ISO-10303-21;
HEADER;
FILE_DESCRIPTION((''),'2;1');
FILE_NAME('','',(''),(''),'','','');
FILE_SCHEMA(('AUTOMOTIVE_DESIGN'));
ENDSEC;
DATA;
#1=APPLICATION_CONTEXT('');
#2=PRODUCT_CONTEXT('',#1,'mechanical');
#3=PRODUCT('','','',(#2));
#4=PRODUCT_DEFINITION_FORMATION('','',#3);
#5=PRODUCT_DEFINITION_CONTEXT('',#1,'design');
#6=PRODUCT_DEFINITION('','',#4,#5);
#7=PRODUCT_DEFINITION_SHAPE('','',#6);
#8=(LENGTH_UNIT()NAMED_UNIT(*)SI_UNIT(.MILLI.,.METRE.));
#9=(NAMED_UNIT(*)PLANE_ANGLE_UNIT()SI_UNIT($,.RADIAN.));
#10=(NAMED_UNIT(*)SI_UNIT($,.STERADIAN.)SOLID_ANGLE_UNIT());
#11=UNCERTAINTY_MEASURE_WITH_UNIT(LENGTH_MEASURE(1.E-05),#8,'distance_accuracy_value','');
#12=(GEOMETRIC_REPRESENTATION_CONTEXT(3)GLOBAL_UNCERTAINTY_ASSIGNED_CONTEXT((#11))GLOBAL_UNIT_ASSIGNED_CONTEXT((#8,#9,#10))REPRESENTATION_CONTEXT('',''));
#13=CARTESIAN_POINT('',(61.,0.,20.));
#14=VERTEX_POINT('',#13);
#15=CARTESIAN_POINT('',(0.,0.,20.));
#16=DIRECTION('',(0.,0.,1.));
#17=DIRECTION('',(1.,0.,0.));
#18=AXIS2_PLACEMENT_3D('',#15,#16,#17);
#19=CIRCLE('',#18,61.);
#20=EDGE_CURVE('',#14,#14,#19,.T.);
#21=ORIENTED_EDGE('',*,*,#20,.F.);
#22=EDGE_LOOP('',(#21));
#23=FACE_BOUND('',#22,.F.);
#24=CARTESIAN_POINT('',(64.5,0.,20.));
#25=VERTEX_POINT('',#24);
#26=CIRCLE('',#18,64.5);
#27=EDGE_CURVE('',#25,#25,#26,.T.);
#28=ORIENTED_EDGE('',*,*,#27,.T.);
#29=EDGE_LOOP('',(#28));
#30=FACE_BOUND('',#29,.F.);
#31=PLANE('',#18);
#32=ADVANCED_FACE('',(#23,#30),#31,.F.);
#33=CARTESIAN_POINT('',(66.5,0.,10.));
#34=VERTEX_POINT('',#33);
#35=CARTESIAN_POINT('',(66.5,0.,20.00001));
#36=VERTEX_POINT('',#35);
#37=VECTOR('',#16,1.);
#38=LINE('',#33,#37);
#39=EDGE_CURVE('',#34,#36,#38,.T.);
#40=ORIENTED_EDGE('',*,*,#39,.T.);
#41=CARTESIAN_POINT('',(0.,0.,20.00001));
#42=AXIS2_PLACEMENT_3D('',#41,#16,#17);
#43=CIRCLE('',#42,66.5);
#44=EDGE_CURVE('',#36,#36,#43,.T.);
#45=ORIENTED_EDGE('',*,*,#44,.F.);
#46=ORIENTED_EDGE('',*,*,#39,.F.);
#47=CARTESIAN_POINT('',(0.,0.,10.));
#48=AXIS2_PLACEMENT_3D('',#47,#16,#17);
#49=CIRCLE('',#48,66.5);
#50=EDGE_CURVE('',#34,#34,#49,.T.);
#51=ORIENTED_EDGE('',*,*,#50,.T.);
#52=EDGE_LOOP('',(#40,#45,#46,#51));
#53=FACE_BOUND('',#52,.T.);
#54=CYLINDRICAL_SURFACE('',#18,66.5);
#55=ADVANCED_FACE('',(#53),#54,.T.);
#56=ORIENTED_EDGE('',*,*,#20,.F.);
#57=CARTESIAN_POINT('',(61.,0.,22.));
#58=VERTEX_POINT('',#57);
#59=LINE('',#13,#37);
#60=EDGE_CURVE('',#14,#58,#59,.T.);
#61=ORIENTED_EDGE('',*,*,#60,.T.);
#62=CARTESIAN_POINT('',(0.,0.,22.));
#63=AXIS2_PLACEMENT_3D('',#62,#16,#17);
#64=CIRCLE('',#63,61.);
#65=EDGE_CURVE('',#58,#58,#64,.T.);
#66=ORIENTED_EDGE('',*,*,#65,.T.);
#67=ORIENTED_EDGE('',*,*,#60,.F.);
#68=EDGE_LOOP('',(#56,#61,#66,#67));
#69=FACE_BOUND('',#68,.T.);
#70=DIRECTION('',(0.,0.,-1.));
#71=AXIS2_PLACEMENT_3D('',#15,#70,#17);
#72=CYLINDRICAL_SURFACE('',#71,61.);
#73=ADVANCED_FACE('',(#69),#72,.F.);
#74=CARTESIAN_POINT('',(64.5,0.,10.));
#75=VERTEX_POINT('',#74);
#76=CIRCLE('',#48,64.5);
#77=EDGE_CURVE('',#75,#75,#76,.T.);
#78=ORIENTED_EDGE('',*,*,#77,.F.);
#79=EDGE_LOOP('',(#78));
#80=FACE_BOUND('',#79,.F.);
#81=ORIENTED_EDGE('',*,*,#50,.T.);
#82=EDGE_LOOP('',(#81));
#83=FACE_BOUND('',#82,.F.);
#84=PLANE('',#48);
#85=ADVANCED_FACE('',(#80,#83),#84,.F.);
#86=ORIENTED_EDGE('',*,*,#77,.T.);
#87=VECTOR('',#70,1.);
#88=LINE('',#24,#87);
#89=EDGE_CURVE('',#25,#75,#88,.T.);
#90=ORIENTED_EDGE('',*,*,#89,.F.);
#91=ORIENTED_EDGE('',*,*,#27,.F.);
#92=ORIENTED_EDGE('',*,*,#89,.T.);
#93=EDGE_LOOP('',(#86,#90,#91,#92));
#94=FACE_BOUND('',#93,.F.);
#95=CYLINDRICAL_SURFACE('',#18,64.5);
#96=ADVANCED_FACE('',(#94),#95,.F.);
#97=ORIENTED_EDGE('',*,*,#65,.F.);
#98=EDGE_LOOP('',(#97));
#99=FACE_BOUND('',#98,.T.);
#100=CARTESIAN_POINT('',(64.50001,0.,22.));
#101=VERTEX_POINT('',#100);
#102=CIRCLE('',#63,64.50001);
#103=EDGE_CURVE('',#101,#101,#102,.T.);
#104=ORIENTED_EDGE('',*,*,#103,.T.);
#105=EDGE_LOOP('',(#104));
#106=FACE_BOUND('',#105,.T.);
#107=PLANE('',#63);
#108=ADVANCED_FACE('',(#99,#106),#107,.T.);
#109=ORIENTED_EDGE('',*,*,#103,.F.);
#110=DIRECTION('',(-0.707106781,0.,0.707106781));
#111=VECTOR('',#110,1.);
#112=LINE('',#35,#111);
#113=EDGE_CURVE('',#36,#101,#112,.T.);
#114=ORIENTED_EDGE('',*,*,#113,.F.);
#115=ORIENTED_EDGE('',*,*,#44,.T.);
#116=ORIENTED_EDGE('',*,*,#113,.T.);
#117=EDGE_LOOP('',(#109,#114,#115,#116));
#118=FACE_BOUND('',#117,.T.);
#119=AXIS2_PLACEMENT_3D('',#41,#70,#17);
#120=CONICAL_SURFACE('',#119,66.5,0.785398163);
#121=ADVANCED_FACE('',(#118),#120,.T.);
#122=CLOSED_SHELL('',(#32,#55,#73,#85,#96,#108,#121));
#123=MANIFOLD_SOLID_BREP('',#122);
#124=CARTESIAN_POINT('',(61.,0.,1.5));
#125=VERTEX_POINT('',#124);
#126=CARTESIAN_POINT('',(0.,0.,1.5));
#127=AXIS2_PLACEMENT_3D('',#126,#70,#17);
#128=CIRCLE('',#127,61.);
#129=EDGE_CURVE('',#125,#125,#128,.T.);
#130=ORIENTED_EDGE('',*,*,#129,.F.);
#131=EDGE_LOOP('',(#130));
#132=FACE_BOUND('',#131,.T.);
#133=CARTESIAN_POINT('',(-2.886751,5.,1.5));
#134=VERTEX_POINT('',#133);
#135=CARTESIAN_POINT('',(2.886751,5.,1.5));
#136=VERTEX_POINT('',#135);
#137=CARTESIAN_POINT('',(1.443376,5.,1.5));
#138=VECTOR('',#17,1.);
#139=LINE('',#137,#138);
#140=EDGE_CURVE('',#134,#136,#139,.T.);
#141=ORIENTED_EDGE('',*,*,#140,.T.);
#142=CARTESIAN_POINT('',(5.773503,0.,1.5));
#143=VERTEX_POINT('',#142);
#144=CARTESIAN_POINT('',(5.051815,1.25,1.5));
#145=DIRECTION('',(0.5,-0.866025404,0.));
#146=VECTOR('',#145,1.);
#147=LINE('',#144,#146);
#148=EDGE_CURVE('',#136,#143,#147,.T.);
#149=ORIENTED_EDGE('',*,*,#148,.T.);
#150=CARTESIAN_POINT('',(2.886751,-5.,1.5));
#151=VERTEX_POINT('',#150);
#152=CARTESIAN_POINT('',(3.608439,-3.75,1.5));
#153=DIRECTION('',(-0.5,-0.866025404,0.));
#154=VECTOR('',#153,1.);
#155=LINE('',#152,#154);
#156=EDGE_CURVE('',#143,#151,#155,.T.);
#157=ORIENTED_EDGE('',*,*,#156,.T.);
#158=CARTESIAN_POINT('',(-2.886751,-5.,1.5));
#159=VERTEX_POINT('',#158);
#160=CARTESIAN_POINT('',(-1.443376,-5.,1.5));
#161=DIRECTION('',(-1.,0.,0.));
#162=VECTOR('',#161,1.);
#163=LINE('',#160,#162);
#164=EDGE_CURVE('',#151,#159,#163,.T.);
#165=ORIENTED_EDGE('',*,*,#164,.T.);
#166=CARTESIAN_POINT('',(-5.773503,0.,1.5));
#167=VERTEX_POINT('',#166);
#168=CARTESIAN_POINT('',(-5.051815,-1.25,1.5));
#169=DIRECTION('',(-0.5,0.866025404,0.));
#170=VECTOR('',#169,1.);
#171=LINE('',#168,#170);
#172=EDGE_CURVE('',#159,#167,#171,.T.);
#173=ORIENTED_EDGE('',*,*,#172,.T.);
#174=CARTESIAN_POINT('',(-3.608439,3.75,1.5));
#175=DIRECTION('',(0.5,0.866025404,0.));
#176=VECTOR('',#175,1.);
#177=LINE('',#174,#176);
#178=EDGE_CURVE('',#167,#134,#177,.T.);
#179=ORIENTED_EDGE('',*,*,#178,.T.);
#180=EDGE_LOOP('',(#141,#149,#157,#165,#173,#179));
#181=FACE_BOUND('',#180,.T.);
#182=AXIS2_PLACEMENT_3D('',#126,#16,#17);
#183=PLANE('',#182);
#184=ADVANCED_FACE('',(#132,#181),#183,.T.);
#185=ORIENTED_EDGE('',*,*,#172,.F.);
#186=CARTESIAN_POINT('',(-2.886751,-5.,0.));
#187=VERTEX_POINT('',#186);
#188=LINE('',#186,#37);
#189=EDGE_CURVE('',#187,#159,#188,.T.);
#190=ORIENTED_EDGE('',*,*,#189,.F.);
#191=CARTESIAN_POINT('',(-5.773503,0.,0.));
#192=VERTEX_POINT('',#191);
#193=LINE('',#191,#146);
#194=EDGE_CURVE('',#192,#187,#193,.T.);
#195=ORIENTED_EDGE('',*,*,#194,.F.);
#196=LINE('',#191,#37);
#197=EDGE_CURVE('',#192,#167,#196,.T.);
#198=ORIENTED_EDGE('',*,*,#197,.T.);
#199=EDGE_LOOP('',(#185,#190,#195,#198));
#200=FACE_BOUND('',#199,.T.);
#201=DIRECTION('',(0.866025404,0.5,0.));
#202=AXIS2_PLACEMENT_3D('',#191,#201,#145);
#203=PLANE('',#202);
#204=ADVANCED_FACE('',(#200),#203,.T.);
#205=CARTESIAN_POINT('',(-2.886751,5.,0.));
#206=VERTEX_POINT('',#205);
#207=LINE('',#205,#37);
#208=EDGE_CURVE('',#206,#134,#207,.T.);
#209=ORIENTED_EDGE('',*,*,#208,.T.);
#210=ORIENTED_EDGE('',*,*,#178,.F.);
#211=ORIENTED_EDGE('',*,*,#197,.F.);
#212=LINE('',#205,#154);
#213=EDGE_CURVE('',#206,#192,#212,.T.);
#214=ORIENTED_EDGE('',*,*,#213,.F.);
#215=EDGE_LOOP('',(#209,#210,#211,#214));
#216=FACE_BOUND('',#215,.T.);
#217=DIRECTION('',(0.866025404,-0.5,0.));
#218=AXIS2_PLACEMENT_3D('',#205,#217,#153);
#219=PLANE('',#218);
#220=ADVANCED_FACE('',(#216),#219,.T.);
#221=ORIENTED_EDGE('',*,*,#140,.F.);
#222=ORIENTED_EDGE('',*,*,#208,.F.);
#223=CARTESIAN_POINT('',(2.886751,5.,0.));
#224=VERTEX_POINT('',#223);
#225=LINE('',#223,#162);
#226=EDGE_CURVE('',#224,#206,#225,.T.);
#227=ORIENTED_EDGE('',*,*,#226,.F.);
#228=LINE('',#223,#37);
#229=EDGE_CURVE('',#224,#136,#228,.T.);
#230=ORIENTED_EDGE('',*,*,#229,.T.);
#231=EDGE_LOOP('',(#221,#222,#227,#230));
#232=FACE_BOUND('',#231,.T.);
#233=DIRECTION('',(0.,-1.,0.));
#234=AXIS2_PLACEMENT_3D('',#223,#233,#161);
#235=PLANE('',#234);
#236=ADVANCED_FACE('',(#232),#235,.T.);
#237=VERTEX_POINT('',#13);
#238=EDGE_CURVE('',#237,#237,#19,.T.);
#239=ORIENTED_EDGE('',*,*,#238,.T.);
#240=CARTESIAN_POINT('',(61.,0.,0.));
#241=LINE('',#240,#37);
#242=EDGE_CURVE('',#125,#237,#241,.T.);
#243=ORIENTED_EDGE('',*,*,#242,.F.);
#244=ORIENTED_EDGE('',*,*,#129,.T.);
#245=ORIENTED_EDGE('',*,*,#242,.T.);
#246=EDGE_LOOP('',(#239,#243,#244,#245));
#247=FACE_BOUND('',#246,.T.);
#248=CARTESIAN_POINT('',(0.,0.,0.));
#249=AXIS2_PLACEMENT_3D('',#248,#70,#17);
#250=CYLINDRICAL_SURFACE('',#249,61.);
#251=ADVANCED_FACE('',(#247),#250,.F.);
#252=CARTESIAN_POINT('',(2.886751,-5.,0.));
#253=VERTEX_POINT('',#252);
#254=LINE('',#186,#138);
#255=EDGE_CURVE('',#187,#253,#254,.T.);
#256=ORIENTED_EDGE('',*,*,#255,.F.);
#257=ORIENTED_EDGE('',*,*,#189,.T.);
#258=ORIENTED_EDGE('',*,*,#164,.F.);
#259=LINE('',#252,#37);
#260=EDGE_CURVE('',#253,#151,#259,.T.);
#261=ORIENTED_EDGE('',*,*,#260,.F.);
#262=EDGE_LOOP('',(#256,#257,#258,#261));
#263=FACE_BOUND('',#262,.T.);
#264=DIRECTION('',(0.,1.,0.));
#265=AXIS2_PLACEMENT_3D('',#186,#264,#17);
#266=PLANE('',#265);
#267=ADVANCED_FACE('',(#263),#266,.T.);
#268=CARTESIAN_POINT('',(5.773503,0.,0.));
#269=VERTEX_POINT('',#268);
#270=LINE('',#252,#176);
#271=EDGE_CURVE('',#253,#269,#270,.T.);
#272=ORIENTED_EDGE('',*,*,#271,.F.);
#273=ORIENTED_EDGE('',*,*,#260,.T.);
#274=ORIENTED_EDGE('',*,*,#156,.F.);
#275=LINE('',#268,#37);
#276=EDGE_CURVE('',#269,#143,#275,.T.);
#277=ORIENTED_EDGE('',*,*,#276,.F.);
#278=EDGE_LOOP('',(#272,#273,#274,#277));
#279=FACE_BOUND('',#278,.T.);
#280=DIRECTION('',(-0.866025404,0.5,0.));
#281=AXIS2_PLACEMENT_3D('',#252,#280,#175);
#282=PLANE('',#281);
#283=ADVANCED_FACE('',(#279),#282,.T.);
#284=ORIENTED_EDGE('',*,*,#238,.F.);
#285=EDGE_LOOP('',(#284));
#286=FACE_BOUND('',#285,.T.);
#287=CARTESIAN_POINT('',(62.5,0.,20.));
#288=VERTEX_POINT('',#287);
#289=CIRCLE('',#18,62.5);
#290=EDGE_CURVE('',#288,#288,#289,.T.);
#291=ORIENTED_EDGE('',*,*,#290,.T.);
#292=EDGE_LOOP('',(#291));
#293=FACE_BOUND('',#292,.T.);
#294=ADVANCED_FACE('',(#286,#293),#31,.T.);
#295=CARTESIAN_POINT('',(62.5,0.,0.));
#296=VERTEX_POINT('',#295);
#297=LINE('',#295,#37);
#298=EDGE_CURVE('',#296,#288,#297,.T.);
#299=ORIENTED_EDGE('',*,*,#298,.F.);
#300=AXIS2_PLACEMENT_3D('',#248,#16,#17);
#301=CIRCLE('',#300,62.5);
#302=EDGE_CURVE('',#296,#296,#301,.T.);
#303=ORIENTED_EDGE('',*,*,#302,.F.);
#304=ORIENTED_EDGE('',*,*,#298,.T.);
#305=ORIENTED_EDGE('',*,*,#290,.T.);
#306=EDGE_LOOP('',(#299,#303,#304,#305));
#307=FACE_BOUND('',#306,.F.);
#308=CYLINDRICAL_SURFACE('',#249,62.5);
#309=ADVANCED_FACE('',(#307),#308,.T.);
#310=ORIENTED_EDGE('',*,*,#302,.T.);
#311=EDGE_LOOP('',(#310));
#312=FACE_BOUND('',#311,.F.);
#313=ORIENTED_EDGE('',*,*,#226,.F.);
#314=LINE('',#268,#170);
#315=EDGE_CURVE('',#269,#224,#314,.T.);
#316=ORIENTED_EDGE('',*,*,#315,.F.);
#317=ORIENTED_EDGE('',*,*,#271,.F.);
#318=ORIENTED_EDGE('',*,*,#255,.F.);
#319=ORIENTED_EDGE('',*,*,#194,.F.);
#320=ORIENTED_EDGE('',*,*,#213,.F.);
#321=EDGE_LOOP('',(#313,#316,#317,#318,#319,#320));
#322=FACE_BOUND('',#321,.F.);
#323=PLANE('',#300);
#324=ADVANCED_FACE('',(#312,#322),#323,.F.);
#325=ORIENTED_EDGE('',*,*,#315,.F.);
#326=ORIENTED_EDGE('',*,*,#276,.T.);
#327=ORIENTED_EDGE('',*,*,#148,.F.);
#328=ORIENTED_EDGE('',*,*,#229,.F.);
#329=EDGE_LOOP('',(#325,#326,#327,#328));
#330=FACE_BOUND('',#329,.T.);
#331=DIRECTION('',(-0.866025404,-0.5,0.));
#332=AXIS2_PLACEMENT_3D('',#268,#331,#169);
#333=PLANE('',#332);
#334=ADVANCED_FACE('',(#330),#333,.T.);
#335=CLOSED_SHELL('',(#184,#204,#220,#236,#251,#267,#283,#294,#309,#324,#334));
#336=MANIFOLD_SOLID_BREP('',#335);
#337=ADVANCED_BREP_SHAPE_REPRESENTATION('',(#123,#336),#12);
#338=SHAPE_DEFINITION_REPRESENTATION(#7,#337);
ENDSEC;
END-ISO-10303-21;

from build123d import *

# Parameters (mm, degrees)
F0_R     = 62.5
F1_DEPTH = 20
F2_T     = -1.5
F3_DEPTH = 25
F4_R     = 66.5
F4_R_2   = 64.5
F4_R_3   = 62.5
F4_R_4   = 61
F5_DEPTH = 2
F6_DEPTH = 10
F7_SIZE  = 1.99999


# Not quite as in the source:
# - a fillet or chamfer is up to 0.001 mm smaller than in the source, because OpenCascade refuses the exact size


with BuildPart() as f1:
    # F0 (on Top) → F1 (new body)
    with BuildSketch(Plane.XY):
        Circle(F0_R)
        Polygon((5.7735026919, 0), (2.8867513459, -5), (-2.8867513459, -5), (-5.7735026919, 0), (-2.8867513459, 5), (2.8867513459, 5), align=None, mode=Mode.SUBTRACT)
        Polygon((-2.8867513459, -5), (2.8867513459, -5), (5.7735026919, 0), (2.8867513459, 5), (-2.8867513459, 5), (-5.7735026919, 0), align=None)
    extrude(amount=F1_DEPTH)

    # F2
    f2_openings = [f1.faces().sort_by_distance(p)[0] for p in [
        (0, 0, 20),
    ]]
    offset(amount=F2_T, openings=f2_openings)

    # F0 (on Top) → F3 (cut)
    with BuildSketch(Plane.XY):
        Polygon((-2.8867513459, -5), (2.8867513459, -5), (5.7735026919, 0), (2.8867513459, 5), (-2.8867513459, 5), (-5.7735026919, 0), align=None)
    extrude(amount=F3_DEPTH, mode=Mode.SUBTRACT)


with BuildPart() as f5:
    # F4 (on face) → F5 (new body)
    with BuildSketch(Plane.XY.offset(20)):
        Circle(F4_R)
        Circle(F4_R_2, mode=Mode.SUBTRACT)
        Circle(F4_R_2)
        Circle(F4_R_3, mode=Mode.SUBTRACT)
        Circle(F4_R_3)
        Circle(F4_R_4, mode=Mode.SUBTRACT)
    extrude(amount=F5_DEPTH)

    # F4 (on face) → F6 (join)
    with BuildSketch(Plane.XY.offset(20)):
        Circle(F4_R)
        Circle(F4_R_2, mode=Mode.SUBTRACT)
    extrude(amount=-F6_DEPTH)

    # F7 (size 2 in the source; OpenCascade refuses exactly that, so slightly less here)
    f7_edges = [f5.edges().sort_by_distance(p)[0] for p in [
        (-66.5, 0, 22),
    ]]
    chamfer(f7_edges, length=F7_SIZE)


solid = Compound([f1.part, f5.part])
